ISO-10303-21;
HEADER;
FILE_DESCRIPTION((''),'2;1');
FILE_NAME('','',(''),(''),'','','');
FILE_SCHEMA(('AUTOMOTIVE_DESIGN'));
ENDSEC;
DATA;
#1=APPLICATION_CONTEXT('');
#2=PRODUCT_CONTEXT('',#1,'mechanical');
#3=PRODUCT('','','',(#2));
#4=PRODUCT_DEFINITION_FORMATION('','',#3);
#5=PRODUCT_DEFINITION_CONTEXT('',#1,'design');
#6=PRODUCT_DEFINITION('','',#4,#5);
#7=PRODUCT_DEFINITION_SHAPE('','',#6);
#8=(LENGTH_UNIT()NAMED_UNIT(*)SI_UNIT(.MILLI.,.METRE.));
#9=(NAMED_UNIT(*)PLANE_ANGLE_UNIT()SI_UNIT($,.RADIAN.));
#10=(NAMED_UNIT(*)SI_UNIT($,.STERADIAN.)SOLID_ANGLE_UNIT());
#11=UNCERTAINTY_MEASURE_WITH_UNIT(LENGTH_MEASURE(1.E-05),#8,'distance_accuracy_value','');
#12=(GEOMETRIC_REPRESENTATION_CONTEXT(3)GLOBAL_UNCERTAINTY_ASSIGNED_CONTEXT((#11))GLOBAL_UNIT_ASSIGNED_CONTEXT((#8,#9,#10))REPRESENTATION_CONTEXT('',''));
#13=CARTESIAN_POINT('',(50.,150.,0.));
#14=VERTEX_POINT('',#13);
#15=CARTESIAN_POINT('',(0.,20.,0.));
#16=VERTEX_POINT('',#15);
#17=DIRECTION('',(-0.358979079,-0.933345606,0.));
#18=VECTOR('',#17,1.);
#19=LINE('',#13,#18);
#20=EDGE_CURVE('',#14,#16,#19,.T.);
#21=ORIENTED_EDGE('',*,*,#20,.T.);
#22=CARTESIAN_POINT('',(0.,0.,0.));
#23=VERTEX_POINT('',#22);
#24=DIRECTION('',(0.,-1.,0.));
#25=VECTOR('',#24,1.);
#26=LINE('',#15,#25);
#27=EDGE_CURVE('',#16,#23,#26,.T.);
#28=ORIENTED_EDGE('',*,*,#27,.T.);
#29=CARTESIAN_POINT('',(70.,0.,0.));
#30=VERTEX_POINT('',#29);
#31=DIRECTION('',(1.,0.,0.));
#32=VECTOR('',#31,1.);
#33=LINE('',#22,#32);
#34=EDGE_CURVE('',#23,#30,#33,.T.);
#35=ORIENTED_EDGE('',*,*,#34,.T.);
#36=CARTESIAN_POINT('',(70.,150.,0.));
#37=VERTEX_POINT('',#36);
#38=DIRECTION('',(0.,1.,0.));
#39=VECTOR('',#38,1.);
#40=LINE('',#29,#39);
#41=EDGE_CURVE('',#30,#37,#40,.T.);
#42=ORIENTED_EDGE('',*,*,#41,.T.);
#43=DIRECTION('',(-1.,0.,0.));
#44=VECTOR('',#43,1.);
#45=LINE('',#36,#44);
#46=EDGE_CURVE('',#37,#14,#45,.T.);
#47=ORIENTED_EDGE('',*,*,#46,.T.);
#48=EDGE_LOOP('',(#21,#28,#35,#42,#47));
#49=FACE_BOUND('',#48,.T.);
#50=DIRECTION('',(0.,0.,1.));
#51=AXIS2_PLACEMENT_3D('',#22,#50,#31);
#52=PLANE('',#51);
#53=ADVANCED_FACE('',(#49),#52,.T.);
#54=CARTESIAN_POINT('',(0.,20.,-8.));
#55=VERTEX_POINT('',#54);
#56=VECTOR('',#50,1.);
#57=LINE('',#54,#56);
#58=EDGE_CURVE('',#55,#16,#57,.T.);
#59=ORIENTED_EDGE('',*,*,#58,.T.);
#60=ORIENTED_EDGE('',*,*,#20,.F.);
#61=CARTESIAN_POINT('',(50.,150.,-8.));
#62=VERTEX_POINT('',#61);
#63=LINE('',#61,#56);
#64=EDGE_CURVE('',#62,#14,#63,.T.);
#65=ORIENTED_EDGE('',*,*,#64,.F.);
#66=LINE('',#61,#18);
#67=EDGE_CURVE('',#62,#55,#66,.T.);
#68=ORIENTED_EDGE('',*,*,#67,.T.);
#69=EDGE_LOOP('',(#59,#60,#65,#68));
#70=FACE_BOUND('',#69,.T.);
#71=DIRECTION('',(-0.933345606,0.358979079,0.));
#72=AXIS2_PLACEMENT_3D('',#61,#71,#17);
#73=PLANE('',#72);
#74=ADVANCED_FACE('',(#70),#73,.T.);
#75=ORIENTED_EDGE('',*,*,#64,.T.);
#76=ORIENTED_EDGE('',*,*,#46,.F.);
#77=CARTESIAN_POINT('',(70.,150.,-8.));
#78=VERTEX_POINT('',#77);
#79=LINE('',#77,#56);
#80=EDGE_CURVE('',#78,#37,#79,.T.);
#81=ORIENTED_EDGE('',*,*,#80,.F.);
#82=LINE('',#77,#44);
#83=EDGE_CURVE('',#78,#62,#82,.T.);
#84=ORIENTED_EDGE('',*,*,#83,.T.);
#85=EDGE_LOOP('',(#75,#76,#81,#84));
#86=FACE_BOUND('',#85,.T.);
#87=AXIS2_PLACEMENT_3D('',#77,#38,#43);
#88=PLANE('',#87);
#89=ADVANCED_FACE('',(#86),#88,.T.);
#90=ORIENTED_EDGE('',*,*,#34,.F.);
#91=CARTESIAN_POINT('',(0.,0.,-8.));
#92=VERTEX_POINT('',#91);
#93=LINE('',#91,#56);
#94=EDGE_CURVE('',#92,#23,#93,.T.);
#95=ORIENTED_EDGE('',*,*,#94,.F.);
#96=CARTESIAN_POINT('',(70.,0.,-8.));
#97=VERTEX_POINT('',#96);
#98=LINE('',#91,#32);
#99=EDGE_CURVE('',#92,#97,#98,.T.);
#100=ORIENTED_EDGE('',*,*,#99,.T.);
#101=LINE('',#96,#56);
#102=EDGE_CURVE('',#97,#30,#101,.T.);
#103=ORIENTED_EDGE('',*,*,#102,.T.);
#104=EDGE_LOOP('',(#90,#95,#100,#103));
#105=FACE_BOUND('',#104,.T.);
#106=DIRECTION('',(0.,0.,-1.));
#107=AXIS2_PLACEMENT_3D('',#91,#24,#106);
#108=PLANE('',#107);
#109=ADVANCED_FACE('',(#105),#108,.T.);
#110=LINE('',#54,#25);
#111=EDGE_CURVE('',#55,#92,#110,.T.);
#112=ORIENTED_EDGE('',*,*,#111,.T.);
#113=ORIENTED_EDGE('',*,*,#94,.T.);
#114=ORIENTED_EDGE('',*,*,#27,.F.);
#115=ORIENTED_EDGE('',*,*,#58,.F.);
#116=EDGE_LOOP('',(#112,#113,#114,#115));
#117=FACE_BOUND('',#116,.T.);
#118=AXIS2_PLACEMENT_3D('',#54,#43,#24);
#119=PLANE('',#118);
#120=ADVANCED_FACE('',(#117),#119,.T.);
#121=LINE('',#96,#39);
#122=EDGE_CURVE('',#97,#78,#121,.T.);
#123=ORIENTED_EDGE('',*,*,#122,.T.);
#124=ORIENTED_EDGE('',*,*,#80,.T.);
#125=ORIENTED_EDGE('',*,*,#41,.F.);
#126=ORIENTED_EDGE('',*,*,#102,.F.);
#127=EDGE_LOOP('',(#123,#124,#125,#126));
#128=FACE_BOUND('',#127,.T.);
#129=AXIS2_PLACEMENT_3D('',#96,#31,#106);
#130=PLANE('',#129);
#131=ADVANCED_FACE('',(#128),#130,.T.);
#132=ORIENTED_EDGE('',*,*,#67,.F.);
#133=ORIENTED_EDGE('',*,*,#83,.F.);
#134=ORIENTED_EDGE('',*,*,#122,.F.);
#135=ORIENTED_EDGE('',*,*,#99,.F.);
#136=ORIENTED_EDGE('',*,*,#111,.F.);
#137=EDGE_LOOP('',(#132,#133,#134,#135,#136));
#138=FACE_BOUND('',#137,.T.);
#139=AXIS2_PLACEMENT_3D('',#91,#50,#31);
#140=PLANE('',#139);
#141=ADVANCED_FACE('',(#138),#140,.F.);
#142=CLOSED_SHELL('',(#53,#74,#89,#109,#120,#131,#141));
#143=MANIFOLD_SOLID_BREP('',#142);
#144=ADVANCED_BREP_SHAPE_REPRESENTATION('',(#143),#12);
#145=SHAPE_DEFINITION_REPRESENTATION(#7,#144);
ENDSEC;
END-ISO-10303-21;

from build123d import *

# Parameters (mm, degrees)
SM_BASE_FLANGE_1_DEPTH = 8


# Sheet-metal steps are written as plain solids
with BuildPart() as part:
    # Sketch 1 → Базовая кромка1 (new body)
    with BuildSketch(Plane.XY):
        Polygon((50, 150), (0, 20), (0, 0), (70, 0), (70, 150), align=None)
    extrude(amount=-SM_BASE_FLANGE_1_DEPTH)


solid = part.part
